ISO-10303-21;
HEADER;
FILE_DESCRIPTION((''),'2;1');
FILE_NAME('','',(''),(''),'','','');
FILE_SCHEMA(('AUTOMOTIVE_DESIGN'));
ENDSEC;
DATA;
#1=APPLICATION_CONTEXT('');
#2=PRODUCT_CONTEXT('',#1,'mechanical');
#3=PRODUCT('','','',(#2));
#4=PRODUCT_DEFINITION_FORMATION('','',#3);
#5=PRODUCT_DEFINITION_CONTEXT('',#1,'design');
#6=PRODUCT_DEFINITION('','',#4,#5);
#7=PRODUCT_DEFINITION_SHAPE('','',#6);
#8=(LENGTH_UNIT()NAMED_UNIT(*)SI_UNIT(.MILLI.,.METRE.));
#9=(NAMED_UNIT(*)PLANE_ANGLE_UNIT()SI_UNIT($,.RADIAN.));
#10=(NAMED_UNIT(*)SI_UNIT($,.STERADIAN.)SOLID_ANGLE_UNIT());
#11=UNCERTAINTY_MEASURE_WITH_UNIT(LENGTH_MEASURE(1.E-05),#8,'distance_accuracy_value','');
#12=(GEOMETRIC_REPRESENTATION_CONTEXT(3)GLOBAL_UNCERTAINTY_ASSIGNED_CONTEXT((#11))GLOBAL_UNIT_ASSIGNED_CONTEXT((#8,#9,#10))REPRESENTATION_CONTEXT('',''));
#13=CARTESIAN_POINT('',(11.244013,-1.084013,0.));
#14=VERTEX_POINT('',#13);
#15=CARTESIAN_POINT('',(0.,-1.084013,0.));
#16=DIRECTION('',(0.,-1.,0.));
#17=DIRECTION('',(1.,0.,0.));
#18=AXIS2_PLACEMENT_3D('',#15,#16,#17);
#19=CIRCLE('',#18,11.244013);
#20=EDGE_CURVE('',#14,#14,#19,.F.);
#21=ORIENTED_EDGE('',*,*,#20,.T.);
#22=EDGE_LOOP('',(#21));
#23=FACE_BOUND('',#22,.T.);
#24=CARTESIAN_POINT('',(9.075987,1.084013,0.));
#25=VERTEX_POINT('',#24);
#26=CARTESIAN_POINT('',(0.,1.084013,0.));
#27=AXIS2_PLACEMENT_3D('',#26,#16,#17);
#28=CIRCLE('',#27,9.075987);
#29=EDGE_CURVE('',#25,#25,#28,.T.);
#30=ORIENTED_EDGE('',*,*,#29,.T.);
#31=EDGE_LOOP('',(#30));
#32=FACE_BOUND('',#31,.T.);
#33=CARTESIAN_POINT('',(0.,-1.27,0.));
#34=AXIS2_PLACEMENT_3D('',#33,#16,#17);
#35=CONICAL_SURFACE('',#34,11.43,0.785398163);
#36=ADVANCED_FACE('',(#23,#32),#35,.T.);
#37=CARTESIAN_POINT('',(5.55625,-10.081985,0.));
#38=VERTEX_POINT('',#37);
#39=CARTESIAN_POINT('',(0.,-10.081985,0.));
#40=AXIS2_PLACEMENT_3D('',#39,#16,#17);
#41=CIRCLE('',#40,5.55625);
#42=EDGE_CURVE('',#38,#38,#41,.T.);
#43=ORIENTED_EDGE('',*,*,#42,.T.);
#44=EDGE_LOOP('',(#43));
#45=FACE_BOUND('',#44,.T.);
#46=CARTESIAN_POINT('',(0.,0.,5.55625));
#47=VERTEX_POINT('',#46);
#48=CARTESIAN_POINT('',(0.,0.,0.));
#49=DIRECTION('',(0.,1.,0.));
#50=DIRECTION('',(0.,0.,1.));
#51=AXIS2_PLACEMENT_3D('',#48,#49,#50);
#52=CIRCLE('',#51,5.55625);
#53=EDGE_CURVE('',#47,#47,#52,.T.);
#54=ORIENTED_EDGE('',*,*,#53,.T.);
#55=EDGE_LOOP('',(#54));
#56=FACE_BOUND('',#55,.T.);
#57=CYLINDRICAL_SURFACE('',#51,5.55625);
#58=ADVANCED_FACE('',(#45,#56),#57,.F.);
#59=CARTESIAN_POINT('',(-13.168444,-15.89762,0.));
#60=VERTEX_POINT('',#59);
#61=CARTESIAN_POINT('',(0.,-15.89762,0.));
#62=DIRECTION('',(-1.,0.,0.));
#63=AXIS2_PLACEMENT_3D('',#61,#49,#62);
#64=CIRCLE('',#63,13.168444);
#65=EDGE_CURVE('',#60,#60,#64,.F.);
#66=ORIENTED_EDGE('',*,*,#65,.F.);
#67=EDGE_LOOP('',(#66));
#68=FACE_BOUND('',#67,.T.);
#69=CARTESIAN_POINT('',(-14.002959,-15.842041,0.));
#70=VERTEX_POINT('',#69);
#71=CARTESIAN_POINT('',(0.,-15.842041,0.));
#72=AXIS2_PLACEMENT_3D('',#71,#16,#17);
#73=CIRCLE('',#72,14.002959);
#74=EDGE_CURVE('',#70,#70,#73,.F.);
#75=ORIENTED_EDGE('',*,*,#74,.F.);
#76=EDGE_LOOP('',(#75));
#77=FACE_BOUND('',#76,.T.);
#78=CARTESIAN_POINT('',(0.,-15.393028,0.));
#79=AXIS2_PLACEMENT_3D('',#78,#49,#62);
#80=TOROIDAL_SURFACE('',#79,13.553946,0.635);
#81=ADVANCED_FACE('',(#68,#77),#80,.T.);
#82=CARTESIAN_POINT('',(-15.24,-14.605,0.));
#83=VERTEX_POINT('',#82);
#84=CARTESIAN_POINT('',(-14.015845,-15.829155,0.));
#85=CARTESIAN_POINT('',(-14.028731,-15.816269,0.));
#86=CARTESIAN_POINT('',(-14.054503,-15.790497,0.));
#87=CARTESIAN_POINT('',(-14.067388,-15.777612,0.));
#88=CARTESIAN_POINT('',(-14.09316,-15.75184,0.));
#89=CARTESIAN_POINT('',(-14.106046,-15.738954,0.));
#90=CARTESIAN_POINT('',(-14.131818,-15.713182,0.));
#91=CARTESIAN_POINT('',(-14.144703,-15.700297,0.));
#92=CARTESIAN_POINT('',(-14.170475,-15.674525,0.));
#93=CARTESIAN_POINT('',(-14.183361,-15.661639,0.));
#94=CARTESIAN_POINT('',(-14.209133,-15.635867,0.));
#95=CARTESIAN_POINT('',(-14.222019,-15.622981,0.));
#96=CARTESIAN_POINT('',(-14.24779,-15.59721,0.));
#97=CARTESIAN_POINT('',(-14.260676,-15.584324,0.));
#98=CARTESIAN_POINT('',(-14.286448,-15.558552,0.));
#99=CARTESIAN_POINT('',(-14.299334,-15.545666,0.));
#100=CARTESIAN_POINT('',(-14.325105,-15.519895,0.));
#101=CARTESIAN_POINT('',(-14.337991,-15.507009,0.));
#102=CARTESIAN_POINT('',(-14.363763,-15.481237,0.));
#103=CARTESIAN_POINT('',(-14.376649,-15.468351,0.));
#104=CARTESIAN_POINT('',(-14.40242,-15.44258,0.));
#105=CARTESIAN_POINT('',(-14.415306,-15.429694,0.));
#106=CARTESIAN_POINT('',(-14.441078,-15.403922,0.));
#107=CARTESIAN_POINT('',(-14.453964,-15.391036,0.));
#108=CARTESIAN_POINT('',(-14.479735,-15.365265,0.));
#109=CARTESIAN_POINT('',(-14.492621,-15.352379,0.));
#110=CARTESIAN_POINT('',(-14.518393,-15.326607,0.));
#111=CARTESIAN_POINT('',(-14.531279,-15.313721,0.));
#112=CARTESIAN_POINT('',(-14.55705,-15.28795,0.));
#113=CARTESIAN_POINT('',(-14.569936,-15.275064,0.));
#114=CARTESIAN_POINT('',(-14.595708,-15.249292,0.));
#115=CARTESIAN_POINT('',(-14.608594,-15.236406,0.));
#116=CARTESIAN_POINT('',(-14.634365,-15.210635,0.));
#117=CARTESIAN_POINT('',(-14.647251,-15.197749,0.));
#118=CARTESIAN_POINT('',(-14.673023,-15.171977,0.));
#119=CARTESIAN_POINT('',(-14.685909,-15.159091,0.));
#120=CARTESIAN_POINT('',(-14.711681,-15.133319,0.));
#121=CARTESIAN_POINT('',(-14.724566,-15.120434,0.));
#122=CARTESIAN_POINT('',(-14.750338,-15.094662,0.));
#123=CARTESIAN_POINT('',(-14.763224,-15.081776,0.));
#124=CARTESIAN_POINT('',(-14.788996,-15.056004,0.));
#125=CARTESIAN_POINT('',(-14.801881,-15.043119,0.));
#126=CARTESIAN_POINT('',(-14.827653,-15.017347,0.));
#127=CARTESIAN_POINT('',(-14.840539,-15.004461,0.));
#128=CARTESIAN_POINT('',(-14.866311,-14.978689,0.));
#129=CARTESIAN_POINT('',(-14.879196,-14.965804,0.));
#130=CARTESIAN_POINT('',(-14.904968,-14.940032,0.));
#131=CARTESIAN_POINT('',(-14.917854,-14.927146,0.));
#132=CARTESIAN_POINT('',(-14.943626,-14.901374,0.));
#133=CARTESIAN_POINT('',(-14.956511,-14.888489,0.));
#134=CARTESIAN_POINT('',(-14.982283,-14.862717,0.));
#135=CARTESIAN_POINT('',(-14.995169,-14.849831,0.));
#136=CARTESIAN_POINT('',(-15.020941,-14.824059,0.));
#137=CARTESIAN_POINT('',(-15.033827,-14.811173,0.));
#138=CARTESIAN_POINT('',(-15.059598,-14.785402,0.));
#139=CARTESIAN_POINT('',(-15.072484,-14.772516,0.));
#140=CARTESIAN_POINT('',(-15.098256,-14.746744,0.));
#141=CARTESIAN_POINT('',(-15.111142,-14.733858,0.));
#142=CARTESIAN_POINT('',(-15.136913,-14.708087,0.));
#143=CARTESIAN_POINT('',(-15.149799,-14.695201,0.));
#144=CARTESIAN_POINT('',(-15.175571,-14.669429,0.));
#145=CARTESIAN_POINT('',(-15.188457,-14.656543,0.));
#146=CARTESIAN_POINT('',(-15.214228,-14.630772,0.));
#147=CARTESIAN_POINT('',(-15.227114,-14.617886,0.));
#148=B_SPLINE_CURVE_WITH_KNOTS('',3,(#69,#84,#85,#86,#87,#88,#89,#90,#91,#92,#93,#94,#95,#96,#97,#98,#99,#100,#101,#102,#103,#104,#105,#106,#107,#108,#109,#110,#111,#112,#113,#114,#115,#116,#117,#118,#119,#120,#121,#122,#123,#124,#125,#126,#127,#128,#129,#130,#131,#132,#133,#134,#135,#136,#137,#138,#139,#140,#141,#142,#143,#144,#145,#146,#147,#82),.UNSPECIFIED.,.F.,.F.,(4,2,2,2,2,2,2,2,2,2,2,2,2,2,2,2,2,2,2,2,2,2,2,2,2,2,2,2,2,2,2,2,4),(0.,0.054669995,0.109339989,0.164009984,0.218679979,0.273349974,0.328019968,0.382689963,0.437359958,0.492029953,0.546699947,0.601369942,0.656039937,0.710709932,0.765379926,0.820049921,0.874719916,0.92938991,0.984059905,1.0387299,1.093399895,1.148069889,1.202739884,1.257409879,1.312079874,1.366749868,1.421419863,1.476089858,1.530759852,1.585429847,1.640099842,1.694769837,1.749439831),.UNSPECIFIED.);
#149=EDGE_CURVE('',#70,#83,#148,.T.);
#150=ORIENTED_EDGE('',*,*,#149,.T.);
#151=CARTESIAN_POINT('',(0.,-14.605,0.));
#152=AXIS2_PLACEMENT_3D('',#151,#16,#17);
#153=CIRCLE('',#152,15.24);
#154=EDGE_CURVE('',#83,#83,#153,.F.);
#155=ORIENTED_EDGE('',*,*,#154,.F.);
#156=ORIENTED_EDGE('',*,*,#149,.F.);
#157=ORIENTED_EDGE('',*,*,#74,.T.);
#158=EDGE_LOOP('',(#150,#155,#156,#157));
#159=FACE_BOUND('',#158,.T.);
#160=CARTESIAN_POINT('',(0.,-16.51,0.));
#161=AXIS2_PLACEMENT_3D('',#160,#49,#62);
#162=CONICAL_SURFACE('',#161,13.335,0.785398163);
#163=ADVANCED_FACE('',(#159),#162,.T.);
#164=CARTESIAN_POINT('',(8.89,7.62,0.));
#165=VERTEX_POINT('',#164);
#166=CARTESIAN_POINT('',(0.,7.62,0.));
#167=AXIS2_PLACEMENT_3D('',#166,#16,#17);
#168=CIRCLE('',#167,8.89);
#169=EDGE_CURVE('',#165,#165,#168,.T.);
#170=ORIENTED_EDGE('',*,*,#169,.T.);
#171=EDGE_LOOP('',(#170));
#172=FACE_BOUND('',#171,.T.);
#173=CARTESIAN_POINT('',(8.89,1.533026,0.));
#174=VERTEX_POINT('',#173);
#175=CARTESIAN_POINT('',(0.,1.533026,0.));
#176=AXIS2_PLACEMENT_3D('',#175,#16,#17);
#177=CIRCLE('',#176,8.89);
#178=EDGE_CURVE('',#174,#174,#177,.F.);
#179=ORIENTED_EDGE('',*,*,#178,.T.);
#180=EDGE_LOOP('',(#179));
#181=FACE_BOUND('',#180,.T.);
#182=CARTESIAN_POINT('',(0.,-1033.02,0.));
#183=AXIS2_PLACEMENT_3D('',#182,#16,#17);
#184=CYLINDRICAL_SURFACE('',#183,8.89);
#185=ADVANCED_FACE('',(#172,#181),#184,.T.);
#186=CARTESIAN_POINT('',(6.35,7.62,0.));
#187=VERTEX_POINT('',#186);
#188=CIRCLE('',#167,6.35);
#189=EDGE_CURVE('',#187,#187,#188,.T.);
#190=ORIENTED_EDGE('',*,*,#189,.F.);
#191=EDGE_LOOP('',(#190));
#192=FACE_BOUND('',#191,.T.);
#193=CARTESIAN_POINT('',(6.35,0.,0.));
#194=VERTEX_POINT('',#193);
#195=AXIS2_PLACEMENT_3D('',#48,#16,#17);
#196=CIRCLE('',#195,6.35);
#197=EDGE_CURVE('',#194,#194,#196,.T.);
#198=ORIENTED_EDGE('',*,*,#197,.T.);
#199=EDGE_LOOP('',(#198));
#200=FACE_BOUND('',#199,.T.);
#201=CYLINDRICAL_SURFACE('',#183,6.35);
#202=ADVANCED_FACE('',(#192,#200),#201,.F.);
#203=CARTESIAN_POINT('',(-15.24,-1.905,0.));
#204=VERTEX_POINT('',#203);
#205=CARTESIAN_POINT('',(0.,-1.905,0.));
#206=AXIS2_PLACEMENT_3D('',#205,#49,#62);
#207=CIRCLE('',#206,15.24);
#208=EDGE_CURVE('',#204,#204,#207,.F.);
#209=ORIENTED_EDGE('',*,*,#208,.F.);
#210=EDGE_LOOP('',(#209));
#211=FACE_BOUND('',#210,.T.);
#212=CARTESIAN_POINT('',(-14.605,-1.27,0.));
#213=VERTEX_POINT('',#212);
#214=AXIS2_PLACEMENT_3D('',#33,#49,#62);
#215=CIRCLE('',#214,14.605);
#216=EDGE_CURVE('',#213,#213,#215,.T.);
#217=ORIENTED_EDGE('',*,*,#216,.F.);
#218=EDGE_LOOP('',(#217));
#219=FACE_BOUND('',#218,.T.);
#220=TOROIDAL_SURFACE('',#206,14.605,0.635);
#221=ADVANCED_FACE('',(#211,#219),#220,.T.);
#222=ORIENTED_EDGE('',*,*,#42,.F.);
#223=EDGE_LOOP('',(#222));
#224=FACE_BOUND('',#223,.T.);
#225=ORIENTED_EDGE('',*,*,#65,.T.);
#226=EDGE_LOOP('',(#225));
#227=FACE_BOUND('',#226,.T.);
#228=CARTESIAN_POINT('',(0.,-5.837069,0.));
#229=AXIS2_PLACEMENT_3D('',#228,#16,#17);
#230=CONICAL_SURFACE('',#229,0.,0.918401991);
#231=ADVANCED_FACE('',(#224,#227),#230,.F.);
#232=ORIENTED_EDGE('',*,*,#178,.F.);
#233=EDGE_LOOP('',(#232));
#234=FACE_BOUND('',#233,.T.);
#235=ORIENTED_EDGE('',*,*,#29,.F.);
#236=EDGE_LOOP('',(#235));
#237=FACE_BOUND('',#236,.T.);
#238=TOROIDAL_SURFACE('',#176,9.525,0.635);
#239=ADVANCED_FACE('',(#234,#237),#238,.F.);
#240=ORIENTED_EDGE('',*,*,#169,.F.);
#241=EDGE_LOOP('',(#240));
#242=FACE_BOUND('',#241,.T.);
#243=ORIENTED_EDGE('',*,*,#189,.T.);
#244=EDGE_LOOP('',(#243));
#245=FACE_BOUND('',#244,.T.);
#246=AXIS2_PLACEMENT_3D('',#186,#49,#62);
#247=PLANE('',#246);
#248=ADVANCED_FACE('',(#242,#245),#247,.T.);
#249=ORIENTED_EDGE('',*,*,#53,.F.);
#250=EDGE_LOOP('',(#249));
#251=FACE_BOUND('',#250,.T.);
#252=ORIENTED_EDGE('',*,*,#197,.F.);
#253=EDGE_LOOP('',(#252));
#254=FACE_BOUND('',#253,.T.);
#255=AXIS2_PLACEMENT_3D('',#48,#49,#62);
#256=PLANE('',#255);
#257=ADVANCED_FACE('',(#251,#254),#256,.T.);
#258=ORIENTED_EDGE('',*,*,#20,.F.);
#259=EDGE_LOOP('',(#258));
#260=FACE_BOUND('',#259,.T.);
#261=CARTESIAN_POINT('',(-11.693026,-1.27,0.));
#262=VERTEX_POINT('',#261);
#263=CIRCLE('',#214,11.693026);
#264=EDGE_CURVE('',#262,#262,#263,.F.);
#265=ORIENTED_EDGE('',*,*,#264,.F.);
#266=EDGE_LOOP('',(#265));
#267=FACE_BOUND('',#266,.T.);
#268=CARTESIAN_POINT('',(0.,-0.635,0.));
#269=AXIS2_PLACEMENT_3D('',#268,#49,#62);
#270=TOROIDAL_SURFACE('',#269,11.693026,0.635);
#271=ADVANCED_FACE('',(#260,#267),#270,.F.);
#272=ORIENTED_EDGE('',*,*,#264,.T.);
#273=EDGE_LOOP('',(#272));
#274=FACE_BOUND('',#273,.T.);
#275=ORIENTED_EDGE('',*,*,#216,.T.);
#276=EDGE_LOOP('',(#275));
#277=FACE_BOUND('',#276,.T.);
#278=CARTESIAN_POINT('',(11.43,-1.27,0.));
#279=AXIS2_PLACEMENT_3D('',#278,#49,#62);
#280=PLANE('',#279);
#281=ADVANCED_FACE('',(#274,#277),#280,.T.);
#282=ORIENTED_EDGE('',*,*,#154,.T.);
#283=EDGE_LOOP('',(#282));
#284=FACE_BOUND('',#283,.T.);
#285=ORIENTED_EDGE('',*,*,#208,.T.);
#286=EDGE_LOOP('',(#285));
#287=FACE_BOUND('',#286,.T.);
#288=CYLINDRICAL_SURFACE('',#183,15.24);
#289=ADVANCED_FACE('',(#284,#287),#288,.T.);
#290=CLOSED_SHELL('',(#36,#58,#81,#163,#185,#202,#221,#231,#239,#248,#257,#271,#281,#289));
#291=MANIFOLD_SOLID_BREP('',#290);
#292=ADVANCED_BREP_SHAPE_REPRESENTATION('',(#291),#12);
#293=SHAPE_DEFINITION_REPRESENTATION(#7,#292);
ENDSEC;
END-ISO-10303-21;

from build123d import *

# Parameters (mm, degrees)
CHAMFER1_SIZE                   = 1.905
FILLET1_R                       = 0.635
F_7_16_0_4375_DOWEL_HOLE1_D     = 11.1125
F_7_16_0_4375_DOWEL_HOLE1_DEPTH = 11.938
F_7_16_0_4375_DOWEL_HOLE1_TIP   = 3.338531814


with BuildPart() as part:
    # Sketch1 → Revolve1 (revolve)
    with BuildSketch(Plane.XY):
        Polygon((0, 0), (6.35, 0), (6.35, 7.62), (8.89, 7.62), (8.89, 1.27), (11.43, -1.27), (15.24, -1.27), (15.24, -16.51), (13.97, -16.51), (0, -5.837068859), align=None)
    revolve(axis=Axis((0, -1033.02, 0), (0, 1, 0)))

    # Chamfer1
    # the kernel refuses this chamfer: 1.905 mm, written as the material it takes off along each edge
    with BuildSketch(Plane(origin=(0, -16.51, 0), x_dir=(1, 0, 0), z_dir=(0, 0, 1))) as chamfer1_piece_1:
        Polygon((15.24, CHAMFER1_SIZE), (15.24 - CHAMFER1_SIZE, 0), (15.24, 0), align=None)
    revolve(axis=Axis((0, -16.51, 0), (0, 1, 0)), mode=Mode.SUBTRACT)

    # Fillet1
    fillet1_edges = [part.edges().sort_by_distance(p)[0] for p in [
        (-13.610020501, -16.234979499, 0),
        (-15.24, -1.27, 0),
        (-11.43, -1.27, 0),
        (-8.89, 1.27, 0),
    ]]
    fillet(fillet1_edges, radius=FILLET1_R)

    # 7/16 (0.4375) Dowel Hole1
    with Locations(Plane(origin=(0, 0, 0), x_dir=(1, 0, 0), z_dir=(0, 1, 0))):
        with Locations((0, 0)):
            Hole(F_7_16_0_4375_DOWEL_HOLE1_D / 2, depth=F_7_16_0_4375_DOWEL_HOLE1_DEPTH)
            with Locations((0, 0, -(F_7_16_0_4375_DOWEL_HOLE1_DEPTH + F_7_16_0_4375_DOWEL_HOLE1_TIP / 2))):  # 118° drill point
                Cone(0, F_7_16_0_4375_DOWEL_HOLE1_D / 2, F_7_16_0_4375_DOWEL_HOLE1_TIP, mode=Mode.SUBTRACT)


solid = part.part
